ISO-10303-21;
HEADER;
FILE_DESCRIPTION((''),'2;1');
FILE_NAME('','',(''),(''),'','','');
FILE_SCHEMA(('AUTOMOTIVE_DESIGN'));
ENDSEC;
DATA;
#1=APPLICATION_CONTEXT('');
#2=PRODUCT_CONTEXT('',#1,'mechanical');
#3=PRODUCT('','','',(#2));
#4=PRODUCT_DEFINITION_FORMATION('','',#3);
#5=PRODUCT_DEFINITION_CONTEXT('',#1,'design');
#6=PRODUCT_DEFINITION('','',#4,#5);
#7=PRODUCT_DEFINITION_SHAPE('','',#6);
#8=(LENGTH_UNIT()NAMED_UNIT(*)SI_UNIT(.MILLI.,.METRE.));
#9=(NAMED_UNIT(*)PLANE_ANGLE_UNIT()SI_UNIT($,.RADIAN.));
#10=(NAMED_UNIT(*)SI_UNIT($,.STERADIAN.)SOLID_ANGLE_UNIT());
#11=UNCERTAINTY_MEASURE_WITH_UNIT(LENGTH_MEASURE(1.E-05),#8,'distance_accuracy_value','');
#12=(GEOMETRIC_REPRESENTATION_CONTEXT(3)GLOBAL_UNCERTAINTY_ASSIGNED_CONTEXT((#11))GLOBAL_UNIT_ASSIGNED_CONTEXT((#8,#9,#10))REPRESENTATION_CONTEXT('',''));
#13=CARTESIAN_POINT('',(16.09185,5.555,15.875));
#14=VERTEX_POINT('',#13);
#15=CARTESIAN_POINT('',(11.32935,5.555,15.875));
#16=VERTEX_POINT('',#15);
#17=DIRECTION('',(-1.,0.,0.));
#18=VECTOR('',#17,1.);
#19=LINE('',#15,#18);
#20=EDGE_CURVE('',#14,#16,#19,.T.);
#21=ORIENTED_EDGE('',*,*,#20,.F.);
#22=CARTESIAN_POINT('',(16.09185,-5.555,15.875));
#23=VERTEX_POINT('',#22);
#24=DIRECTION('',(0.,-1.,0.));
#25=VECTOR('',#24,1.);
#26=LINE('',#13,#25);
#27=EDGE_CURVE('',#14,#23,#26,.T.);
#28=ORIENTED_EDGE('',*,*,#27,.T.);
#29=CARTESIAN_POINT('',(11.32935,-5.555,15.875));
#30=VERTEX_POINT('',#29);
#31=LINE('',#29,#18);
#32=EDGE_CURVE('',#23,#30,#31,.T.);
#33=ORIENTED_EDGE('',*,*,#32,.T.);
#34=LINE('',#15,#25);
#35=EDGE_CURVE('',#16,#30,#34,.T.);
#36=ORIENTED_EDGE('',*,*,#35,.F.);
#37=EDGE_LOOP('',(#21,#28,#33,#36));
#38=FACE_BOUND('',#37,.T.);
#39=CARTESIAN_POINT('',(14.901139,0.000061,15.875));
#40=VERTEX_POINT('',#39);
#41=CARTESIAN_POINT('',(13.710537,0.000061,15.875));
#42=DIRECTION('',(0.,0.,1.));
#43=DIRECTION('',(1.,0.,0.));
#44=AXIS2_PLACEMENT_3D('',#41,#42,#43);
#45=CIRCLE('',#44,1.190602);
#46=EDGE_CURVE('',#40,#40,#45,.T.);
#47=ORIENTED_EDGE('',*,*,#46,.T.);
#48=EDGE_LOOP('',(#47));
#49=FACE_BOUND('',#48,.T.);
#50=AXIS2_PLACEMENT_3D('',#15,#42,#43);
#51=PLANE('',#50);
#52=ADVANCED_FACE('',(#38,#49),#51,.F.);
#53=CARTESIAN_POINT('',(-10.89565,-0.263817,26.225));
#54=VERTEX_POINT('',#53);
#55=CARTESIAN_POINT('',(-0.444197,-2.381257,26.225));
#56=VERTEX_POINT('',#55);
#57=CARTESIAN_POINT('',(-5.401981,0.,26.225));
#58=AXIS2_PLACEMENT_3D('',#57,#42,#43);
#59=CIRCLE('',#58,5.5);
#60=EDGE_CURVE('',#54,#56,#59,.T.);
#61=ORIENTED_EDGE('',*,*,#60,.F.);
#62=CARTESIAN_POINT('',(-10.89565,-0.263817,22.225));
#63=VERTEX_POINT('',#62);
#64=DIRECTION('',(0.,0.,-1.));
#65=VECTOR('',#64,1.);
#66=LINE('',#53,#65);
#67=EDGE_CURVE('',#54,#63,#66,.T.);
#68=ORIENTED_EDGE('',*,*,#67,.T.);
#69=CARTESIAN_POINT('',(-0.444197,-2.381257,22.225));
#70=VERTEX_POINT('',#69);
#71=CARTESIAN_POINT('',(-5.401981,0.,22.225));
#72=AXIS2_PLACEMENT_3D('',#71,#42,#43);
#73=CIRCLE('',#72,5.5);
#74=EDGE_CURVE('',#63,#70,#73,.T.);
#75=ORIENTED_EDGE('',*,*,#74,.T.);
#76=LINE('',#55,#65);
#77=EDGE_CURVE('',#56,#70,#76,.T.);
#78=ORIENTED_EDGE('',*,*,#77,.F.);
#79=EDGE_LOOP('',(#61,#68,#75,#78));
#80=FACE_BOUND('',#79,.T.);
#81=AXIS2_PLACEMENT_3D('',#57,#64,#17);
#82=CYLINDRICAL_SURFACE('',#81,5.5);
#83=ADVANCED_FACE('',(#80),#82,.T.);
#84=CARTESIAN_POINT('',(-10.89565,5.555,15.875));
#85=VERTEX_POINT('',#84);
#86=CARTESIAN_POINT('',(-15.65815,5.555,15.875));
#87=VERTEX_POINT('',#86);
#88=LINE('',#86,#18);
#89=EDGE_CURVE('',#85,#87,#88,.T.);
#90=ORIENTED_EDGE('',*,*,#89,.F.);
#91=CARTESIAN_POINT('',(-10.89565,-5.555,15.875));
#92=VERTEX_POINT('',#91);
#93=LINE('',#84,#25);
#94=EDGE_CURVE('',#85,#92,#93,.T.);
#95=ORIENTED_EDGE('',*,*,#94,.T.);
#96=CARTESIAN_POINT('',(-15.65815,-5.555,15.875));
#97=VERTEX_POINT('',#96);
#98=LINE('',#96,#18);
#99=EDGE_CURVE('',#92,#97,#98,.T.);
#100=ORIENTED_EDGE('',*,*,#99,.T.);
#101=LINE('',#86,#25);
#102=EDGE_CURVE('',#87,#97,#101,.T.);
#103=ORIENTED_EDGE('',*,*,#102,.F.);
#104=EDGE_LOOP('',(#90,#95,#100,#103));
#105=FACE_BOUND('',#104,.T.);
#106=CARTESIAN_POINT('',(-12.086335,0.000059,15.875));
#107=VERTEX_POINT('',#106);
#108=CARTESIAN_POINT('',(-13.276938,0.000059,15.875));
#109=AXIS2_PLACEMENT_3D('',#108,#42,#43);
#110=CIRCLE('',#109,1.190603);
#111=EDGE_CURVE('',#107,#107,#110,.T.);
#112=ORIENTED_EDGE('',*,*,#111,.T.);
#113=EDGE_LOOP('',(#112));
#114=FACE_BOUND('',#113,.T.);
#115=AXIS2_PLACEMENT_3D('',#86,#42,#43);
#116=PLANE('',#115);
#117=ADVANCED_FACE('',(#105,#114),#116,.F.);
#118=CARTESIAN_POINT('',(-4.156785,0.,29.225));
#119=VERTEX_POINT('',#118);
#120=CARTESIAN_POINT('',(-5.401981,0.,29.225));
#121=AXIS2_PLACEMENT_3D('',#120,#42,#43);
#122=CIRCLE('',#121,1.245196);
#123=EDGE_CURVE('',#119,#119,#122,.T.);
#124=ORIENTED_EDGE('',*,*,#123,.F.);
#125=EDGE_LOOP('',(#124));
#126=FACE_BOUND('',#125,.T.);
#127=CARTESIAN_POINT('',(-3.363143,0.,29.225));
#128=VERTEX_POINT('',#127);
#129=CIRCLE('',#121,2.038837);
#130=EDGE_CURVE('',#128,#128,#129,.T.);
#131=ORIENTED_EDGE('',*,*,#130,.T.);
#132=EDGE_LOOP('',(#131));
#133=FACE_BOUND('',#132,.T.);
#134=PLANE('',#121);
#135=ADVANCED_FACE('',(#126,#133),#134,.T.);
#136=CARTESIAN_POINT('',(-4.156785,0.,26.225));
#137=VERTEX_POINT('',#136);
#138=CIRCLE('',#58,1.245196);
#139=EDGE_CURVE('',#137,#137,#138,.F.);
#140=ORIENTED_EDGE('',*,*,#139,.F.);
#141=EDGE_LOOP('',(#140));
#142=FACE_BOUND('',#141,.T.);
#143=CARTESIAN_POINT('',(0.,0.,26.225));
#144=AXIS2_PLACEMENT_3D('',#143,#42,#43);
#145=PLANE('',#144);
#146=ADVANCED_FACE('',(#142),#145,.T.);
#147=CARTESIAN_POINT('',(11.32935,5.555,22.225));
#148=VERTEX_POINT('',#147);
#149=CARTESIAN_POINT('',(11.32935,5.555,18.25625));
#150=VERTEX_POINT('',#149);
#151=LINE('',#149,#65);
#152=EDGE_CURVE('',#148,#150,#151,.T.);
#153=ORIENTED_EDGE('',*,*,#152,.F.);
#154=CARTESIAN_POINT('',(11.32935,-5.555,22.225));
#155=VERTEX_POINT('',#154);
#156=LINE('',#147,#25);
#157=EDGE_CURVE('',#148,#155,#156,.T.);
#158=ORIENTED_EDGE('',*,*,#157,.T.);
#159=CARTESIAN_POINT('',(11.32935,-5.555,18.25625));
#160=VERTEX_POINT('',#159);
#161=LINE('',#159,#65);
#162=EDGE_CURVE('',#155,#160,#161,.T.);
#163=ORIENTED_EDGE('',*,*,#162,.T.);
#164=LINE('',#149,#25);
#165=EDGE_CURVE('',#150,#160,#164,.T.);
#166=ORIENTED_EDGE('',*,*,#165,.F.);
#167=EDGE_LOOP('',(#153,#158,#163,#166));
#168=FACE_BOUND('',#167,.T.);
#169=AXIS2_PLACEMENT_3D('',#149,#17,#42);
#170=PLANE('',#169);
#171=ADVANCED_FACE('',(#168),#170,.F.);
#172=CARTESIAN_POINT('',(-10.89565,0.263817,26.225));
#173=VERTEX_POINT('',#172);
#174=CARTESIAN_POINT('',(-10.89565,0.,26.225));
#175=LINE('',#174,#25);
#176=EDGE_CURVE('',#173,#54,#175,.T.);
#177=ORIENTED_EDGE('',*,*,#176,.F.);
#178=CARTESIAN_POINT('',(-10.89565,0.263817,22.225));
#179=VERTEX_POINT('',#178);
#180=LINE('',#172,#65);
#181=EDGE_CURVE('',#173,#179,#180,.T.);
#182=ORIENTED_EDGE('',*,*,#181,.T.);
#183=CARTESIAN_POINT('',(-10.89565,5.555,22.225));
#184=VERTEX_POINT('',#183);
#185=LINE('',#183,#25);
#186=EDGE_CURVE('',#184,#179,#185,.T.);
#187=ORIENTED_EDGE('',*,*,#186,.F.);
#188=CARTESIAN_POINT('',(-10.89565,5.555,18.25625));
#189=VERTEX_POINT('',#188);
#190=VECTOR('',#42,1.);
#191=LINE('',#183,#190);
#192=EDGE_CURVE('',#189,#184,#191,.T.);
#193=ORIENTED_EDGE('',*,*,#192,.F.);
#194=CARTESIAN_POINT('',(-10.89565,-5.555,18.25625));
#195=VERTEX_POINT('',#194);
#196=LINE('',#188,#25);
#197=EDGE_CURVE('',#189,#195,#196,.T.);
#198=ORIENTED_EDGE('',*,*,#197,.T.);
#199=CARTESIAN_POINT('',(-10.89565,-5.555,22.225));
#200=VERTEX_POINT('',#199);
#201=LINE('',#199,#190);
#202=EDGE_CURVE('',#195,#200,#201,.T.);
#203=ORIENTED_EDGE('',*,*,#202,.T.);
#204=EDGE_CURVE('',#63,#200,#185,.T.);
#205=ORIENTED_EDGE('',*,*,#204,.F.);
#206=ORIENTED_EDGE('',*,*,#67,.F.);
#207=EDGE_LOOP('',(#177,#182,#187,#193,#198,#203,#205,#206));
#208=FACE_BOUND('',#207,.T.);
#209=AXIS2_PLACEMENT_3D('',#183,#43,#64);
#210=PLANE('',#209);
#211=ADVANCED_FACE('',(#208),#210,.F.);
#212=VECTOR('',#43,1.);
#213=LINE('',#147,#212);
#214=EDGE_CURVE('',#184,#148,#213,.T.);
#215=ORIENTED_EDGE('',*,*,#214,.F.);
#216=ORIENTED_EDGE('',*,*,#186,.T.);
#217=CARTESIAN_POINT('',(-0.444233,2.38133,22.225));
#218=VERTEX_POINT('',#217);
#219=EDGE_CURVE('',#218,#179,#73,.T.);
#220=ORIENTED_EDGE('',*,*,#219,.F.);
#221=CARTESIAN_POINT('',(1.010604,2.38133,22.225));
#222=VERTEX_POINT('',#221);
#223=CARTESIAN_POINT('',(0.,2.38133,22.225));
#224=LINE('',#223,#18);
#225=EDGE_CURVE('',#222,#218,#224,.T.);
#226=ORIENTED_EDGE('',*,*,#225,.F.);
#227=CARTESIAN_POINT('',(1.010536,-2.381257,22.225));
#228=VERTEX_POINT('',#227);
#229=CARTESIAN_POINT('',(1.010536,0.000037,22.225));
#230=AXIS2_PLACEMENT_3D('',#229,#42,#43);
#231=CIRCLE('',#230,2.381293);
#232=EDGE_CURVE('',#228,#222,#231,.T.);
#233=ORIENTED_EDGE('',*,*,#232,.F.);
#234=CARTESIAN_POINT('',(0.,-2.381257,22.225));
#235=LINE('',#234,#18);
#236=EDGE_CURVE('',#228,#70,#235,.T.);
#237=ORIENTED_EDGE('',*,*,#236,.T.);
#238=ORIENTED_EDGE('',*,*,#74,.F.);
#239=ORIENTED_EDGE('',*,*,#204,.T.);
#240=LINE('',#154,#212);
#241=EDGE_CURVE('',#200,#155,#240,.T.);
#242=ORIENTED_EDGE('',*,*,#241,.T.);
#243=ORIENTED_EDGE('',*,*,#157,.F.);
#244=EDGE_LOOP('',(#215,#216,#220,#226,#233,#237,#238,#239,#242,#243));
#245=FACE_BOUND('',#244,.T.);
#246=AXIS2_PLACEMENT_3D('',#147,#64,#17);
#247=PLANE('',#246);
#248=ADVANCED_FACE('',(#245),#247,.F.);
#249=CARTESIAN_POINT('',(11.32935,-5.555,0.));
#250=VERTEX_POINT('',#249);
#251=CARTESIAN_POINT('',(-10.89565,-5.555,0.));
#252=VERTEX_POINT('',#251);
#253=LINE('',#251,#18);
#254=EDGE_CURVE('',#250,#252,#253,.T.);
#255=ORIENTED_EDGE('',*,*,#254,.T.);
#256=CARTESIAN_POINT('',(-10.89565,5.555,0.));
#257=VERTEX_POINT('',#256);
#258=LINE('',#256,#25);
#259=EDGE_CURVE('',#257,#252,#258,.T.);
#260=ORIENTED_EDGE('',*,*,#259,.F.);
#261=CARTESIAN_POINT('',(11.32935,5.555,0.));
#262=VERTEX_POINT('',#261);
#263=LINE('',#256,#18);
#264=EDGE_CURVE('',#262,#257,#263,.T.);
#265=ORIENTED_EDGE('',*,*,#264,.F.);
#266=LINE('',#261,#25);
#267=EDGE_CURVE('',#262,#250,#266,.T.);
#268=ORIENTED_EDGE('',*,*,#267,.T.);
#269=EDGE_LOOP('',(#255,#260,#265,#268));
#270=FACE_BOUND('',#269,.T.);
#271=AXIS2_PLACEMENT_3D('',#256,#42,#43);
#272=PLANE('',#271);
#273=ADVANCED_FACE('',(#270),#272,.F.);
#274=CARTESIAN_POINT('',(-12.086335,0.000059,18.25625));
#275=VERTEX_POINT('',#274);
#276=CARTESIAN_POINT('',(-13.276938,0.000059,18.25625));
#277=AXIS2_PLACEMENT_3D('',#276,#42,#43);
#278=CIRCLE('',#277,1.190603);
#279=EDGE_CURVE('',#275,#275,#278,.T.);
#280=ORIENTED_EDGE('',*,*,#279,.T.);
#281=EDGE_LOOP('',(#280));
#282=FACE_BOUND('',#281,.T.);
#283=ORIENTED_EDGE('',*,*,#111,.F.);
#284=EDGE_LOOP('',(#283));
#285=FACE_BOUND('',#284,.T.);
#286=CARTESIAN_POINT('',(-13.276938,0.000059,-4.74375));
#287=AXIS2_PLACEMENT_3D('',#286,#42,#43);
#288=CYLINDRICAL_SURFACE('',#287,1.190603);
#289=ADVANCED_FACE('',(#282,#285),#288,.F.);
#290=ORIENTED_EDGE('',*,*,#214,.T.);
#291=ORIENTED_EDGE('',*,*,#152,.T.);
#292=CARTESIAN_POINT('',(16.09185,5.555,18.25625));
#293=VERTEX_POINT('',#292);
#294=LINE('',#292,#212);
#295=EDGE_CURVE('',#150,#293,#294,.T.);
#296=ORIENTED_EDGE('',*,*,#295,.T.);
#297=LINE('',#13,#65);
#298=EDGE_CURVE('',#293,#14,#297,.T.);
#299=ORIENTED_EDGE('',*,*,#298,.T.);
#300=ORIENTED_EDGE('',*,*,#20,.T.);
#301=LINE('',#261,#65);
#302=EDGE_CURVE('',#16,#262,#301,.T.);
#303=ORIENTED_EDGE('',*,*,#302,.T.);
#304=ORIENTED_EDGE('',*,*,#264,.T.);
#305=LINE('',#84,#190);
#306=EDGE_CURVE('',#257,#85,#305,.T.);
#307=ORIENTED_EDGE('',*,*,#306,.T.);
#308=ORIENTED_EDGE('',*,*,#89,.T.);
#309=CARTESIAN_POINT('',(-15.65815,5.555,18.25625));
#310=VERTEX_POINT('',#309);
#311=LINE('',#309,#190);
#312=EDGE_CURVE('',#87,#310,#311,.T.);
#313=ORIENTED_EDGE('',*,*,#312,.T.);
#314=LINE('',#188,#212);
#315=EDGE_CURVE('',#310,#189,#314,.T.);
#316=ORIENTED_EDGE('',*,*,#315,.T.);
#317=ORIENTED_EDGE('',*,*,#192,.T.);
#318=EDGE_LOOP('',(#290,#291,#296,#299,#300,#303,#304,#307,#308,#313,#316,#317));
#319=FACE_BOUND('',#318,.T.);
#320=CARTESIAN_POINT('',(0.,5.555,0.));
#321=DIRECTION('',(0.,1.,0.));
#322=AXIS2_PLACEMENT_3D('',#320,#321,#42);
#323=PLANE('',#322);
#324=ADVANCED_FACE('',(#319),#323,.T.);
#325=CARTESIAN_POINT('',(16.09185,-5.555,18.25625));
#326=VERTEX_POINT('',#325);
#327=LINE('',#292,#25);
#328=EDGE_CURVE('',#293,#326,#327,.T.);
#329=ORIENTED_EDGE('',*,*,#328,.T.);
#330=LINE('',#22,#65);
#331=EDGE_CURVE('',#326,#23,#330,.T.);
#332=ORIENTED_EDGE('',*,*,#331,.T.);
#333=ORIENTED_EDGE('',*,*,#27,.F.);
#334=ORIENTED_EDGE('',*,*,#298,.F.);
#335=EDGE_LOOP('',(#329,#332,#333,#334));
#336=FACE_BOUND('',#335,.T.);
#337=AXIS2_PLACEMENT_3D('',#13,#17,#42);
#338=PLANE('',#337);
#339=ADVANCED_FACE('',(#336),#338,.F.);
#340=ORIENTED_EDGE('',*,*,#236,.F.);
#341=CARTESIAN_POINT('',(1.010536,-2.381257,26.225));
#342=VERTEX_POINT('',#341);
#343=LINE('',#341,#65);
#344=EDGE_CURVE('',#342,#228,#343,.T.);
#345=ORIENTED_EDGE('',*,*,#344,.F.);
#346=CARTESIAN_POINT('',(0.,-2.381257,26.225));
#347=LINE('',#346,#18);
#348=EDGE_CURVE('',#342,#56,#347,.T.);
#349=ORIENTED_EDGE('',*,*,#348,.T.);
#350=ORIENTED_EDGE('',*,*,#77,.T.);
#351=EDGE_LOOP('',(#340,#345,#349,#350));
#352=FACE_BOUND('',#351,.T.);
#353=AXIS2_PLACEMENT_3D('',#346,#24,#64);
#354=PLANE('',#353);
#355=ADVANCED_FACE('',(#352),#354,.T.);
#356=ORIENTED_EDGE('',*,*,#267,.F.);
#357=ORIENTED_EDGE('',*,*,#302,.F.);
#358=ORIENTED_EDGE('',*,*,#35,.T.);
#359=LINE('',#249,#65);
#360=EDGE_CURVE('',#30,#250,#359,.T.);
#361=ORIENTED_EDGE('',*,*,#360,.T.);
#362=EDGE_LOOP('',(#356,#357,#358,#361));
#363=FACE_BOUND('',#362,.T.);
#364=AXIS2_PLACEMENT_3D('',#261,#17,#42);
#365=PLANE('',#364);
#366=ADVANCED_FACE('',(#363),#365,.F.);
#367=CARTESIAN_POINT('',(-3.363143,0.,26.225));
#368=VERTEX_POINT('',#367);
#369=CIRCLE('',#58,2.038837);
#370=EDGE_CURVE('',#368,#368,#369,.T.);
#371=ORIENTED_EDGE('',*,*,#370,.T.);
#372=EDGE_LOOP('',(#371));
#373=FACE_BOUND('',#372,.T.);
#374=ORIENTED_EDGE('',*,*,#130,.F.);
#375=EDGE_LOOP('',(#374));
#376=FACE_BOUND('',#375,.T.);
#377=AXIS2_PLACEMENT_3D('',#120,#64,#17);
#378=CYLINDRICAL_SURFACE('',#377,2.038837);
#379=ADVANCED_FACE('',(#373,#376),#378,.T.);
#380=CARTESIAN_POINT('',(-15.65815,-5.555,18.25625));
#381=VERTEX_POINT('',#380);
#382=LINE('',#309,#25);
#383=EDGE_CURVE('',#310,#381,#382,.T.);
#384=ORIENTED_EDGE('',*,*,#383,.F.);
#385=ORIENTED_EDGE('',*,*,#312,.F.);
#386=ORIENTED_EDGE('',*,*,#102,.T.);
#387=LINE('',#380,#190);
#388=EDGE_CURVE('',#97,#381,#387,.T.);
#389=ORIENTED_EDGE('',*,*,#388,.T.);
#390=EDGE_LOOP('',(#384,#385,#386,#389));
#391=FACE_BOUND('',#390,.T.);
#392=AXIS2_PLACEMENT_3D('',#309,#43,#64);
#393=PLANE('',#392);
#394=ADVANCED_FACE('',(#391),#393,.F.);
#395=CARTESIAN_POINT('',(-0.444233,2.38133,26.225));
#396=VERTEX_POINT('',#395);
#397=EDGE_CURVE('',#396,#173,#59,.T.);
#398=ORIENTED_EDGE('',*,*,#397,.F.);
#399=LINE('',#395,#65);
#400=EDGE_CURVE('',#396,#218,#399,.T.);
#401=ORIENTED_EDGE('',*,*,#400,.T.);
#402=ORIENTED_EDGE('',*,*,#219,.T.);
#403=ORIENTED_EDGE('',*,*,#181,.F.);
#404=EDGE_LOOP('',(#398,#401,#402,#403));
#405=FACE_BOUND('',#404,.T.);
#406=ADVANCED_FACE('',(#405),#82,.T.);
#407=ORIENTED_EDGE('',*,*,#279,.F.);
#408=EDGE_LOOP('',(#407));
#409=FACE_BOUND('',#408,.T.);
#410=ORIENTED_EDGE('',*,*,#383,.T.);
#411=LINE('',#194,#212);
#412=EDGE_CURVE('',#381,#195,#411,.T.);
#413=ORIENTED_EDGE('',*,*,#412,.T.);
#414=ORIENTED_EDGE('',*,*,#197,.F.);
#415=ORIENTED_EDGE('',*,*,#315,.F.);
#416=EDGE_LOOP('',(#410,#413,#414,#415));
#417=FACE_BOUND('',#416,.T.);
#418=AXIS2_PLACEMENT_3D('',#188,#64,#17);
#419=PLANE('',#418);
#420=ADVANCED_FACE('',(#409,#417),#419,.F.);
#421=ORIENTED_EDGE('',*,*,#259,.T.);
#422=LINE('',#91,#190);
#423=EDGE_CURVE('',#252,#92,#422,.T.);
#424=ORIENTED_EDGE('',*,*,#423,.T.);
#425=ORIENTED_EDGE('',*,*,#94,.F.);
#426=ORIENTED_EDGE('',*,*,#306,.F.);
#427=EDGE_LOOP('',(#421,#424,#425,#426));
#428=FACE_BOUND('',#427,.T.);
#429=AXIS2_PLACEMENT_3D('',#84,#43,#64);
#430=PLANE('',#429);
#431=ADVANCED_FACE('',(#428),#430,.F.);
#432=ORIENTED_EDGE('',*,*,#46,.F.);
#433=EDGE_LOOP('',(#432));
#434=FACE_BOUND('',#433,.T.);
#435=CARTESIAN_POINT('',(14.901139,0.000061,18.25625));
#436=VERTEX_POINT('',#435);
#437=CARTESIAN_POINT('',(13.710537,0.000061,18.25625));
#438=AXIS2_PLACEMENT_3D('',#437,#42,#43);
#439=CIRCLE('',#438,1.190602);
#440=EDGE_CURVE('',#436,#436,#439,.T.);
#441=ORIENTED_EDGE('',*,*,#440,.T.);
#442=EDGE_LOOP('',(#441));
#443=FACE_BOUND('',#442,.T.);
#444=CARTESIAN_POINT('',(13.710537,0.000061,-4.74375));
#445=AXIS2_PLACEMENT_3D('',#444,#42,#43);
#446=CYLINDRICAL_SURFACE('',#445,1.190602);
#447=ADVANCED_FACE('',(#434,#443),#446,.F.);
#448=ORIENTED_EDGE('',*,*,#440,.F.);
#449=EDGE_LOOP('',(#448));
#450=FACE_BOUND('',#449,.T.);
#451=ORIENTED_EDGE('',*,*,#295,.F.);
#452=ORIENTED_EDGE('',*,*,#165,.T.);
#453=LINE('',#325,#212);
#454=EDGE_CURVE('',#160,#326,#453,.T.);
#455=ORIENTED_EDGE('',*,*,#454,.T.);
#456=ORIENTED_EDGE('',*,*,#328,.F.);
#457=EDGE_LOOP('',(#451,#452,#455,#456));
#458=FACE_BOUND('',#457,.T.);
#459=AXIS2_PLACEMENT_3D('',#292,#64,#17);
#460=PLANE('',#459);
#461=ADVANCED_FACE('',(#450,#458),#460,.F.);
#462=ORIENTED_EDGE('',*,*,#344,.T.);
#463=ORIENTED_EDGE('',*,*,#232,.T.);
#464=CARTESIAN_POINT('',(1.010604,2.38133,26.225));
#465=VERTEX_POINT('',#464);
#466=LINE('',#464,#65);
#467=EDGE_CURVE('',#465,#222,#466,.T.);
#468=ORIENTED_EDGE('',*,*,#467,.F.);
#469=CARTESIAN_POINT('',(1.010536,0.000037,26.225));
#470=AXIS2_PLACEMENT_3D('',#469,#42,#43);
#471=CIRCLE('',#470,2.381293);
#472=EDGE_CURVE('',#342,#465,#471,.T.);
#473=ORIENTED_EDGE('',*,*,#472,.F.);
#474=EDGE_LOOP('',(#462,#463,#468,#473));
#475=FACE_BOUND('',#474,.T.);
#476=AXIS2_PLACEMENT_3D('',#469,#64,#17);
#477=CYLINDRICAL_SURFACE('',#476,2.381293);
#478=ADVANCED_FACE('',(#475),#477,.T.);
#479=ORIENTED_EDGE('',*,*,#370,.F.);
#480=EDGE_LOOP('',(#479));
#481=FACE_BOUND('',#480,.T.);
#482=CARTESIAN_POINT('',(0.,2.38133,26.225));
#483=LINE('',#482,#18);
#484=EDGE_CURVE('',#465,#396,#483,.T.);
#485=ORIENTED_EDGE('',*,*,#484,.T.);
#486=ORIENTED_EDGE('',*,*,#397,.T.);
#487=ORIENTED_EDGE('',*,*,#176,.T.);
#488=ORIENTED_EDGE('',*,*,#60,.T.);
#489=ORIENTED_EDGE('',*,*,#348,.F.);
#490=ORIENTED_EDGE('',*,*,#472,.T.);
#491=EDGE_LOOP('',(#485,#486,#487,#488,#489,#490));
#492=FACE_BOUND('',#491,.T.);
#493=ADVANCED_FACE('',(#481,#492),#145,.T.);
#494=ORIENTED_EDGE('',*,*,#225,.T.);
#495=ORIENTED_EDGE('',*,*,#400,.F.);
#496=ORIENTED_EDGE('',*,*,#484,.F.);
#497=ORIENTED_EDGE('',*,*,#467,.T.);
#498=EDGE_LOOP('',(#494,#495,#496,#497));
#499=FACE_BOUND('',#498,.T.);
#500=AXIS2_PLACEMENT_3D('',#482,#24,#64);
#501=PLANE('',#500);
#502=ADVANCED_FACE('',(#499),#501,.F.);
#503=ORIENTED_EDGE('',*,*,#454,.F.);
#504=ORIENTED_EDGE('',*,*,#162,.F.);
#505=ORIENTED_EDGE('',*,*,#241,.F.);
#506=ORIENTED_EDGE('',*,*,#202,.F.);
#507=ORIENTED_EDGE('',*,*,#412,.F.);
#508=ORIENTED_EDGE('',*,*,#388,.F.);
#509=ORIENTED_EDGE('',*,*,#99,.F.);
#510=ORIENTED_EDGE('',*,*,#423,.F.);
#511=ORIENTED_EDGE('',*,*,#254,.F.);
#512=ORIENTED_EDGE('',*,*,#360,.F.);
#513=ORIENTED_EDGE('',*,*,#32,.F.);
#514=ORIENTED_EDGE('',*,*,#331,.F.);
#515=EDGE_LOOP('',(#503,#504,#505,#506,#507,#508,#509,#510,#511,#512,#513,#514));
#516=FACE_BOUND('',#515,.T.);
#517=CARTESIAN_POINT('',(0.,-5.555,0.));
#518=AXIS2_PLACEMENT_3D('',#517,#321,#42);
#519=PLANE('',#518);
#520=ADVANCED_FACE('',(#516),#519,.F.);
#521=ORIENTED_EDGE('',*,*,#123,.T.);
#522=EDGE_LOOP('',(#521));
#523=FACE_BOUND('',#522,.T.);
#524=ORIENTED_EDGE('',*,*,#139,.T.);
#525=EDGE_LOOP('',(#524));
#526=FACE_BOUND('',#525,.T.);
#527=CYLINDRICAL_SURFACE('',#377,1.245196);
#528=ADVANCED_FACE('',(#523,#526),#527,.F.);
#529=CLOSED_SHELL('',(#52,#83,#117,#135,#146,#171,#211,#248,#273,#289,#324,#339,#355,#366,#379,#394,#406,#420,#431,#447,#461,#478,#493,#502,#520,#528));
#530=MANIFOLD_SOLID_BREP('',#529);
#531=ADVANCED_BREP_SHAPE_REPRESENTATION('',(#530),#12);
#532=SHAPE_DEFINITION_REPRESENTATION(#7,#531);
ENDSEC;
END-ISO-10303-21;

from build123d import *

# Parameters (mm, degrees)
P_IDAT_VYSUNUT_M1_DEPTH  = 5.555
P_IDAT_VYSUNUT_M2_DEPTH  = 4
SKICA3_R                 = 2.03883748
SKICA3_R_2               = 1.24519559
P_IDAT_VYSUNUT_M3_DEPTH  = 3
SKICA5_R                 = 1.190602913
SKICA5_R_2               = 1.19060243
ODEBRAT_VYSUNUT_M1_DEPTH = 23


# Read off the part's stored shape, not the designer's step: Přidat vysunutím2
with BuildPart() as part:
    # Skica1 → Přidat vysunutím1 (new, symmetric)
    with BuildSketch(Plane(origin=(0, 0, 0), x_dir=(1, 0, 0), z_dir=(0, 1, 0))):
        Polygon((11.32935, -15.875), (16.09185, -15.875), (16.09185, -18.25625), (11.32935, -18.25625), (11.32935, -22.225), (-10.89565, -22.225), (-10.89565, -18.25625), (-15.65815, -18.25625), (-15.65815, -15.875), (-10.89565, -15.875), (-10.89565, 0), (11.32935, 0), align=None)
    extrude(amount=P_IDAT_VYSUNUT_M1_DEPTH, both=True)

    # Přidat vysunutím2 outline → Přidat vysunutím2 (add)
    with BuildSketch(Plane.XY.offset(22.225)):
        with BuildLine():
            Line((-10.89565, 0.263816958), (-10.89565, -0.263816958))
            ThreePointArc((-10.89565, -0.263816958), (-6.494080203, -5.390484118), (-0.444197365, -2.381256561))
            Line((-0.444197365, -2.381256561), (1.010536018, -2.381256561))
            ThreePointArc((1.010536018, -2.381256561), (3.391829299, 2.729e-06), (1.010604, 2.38133))
            Line((1.010604, 2.38133), (-0.444232639, 2.38133))
            ThreePointArc((-0.444232639, 2.38133), (-6.494120128, 5.390476029), (-10.89565, 0.263816958))
        make_face()
    extrude(amount=P_IDAT_VYSUNUT_M2_DEPTH)

    # Skica3 → Přidat vysunutím3 (add)
    with BuildSketch(Plane.XY.offset(26.225)):
        with Locations((-5.401980861, 0)):
            Circle(SKICA3_R)
        with Locations((-5.401980861, 0)):
            Circle(SKICA3_R_2, mode=Mode.SUBTRACT)
    extrude(amount=P_IDAT_VYSUNUT_M3_DEPTH)

    # Skica5 → Odebrat vysunutím1 (cut)
    with BuildSketch(Plane.XY.offset(18.25625)):
        with Locations((-13.276937552, 5.8558e-05)):
            Circle(SKICA5_R)
        with Locations((13.71053658, 6.1415e-05)):
            Circle(SKICA5_R_2)
    extrude(amount=-ODEBRAT_VYSUNUT_M1_DEPTH, mode=Mode.SUBTRACT)


solid = part.part
